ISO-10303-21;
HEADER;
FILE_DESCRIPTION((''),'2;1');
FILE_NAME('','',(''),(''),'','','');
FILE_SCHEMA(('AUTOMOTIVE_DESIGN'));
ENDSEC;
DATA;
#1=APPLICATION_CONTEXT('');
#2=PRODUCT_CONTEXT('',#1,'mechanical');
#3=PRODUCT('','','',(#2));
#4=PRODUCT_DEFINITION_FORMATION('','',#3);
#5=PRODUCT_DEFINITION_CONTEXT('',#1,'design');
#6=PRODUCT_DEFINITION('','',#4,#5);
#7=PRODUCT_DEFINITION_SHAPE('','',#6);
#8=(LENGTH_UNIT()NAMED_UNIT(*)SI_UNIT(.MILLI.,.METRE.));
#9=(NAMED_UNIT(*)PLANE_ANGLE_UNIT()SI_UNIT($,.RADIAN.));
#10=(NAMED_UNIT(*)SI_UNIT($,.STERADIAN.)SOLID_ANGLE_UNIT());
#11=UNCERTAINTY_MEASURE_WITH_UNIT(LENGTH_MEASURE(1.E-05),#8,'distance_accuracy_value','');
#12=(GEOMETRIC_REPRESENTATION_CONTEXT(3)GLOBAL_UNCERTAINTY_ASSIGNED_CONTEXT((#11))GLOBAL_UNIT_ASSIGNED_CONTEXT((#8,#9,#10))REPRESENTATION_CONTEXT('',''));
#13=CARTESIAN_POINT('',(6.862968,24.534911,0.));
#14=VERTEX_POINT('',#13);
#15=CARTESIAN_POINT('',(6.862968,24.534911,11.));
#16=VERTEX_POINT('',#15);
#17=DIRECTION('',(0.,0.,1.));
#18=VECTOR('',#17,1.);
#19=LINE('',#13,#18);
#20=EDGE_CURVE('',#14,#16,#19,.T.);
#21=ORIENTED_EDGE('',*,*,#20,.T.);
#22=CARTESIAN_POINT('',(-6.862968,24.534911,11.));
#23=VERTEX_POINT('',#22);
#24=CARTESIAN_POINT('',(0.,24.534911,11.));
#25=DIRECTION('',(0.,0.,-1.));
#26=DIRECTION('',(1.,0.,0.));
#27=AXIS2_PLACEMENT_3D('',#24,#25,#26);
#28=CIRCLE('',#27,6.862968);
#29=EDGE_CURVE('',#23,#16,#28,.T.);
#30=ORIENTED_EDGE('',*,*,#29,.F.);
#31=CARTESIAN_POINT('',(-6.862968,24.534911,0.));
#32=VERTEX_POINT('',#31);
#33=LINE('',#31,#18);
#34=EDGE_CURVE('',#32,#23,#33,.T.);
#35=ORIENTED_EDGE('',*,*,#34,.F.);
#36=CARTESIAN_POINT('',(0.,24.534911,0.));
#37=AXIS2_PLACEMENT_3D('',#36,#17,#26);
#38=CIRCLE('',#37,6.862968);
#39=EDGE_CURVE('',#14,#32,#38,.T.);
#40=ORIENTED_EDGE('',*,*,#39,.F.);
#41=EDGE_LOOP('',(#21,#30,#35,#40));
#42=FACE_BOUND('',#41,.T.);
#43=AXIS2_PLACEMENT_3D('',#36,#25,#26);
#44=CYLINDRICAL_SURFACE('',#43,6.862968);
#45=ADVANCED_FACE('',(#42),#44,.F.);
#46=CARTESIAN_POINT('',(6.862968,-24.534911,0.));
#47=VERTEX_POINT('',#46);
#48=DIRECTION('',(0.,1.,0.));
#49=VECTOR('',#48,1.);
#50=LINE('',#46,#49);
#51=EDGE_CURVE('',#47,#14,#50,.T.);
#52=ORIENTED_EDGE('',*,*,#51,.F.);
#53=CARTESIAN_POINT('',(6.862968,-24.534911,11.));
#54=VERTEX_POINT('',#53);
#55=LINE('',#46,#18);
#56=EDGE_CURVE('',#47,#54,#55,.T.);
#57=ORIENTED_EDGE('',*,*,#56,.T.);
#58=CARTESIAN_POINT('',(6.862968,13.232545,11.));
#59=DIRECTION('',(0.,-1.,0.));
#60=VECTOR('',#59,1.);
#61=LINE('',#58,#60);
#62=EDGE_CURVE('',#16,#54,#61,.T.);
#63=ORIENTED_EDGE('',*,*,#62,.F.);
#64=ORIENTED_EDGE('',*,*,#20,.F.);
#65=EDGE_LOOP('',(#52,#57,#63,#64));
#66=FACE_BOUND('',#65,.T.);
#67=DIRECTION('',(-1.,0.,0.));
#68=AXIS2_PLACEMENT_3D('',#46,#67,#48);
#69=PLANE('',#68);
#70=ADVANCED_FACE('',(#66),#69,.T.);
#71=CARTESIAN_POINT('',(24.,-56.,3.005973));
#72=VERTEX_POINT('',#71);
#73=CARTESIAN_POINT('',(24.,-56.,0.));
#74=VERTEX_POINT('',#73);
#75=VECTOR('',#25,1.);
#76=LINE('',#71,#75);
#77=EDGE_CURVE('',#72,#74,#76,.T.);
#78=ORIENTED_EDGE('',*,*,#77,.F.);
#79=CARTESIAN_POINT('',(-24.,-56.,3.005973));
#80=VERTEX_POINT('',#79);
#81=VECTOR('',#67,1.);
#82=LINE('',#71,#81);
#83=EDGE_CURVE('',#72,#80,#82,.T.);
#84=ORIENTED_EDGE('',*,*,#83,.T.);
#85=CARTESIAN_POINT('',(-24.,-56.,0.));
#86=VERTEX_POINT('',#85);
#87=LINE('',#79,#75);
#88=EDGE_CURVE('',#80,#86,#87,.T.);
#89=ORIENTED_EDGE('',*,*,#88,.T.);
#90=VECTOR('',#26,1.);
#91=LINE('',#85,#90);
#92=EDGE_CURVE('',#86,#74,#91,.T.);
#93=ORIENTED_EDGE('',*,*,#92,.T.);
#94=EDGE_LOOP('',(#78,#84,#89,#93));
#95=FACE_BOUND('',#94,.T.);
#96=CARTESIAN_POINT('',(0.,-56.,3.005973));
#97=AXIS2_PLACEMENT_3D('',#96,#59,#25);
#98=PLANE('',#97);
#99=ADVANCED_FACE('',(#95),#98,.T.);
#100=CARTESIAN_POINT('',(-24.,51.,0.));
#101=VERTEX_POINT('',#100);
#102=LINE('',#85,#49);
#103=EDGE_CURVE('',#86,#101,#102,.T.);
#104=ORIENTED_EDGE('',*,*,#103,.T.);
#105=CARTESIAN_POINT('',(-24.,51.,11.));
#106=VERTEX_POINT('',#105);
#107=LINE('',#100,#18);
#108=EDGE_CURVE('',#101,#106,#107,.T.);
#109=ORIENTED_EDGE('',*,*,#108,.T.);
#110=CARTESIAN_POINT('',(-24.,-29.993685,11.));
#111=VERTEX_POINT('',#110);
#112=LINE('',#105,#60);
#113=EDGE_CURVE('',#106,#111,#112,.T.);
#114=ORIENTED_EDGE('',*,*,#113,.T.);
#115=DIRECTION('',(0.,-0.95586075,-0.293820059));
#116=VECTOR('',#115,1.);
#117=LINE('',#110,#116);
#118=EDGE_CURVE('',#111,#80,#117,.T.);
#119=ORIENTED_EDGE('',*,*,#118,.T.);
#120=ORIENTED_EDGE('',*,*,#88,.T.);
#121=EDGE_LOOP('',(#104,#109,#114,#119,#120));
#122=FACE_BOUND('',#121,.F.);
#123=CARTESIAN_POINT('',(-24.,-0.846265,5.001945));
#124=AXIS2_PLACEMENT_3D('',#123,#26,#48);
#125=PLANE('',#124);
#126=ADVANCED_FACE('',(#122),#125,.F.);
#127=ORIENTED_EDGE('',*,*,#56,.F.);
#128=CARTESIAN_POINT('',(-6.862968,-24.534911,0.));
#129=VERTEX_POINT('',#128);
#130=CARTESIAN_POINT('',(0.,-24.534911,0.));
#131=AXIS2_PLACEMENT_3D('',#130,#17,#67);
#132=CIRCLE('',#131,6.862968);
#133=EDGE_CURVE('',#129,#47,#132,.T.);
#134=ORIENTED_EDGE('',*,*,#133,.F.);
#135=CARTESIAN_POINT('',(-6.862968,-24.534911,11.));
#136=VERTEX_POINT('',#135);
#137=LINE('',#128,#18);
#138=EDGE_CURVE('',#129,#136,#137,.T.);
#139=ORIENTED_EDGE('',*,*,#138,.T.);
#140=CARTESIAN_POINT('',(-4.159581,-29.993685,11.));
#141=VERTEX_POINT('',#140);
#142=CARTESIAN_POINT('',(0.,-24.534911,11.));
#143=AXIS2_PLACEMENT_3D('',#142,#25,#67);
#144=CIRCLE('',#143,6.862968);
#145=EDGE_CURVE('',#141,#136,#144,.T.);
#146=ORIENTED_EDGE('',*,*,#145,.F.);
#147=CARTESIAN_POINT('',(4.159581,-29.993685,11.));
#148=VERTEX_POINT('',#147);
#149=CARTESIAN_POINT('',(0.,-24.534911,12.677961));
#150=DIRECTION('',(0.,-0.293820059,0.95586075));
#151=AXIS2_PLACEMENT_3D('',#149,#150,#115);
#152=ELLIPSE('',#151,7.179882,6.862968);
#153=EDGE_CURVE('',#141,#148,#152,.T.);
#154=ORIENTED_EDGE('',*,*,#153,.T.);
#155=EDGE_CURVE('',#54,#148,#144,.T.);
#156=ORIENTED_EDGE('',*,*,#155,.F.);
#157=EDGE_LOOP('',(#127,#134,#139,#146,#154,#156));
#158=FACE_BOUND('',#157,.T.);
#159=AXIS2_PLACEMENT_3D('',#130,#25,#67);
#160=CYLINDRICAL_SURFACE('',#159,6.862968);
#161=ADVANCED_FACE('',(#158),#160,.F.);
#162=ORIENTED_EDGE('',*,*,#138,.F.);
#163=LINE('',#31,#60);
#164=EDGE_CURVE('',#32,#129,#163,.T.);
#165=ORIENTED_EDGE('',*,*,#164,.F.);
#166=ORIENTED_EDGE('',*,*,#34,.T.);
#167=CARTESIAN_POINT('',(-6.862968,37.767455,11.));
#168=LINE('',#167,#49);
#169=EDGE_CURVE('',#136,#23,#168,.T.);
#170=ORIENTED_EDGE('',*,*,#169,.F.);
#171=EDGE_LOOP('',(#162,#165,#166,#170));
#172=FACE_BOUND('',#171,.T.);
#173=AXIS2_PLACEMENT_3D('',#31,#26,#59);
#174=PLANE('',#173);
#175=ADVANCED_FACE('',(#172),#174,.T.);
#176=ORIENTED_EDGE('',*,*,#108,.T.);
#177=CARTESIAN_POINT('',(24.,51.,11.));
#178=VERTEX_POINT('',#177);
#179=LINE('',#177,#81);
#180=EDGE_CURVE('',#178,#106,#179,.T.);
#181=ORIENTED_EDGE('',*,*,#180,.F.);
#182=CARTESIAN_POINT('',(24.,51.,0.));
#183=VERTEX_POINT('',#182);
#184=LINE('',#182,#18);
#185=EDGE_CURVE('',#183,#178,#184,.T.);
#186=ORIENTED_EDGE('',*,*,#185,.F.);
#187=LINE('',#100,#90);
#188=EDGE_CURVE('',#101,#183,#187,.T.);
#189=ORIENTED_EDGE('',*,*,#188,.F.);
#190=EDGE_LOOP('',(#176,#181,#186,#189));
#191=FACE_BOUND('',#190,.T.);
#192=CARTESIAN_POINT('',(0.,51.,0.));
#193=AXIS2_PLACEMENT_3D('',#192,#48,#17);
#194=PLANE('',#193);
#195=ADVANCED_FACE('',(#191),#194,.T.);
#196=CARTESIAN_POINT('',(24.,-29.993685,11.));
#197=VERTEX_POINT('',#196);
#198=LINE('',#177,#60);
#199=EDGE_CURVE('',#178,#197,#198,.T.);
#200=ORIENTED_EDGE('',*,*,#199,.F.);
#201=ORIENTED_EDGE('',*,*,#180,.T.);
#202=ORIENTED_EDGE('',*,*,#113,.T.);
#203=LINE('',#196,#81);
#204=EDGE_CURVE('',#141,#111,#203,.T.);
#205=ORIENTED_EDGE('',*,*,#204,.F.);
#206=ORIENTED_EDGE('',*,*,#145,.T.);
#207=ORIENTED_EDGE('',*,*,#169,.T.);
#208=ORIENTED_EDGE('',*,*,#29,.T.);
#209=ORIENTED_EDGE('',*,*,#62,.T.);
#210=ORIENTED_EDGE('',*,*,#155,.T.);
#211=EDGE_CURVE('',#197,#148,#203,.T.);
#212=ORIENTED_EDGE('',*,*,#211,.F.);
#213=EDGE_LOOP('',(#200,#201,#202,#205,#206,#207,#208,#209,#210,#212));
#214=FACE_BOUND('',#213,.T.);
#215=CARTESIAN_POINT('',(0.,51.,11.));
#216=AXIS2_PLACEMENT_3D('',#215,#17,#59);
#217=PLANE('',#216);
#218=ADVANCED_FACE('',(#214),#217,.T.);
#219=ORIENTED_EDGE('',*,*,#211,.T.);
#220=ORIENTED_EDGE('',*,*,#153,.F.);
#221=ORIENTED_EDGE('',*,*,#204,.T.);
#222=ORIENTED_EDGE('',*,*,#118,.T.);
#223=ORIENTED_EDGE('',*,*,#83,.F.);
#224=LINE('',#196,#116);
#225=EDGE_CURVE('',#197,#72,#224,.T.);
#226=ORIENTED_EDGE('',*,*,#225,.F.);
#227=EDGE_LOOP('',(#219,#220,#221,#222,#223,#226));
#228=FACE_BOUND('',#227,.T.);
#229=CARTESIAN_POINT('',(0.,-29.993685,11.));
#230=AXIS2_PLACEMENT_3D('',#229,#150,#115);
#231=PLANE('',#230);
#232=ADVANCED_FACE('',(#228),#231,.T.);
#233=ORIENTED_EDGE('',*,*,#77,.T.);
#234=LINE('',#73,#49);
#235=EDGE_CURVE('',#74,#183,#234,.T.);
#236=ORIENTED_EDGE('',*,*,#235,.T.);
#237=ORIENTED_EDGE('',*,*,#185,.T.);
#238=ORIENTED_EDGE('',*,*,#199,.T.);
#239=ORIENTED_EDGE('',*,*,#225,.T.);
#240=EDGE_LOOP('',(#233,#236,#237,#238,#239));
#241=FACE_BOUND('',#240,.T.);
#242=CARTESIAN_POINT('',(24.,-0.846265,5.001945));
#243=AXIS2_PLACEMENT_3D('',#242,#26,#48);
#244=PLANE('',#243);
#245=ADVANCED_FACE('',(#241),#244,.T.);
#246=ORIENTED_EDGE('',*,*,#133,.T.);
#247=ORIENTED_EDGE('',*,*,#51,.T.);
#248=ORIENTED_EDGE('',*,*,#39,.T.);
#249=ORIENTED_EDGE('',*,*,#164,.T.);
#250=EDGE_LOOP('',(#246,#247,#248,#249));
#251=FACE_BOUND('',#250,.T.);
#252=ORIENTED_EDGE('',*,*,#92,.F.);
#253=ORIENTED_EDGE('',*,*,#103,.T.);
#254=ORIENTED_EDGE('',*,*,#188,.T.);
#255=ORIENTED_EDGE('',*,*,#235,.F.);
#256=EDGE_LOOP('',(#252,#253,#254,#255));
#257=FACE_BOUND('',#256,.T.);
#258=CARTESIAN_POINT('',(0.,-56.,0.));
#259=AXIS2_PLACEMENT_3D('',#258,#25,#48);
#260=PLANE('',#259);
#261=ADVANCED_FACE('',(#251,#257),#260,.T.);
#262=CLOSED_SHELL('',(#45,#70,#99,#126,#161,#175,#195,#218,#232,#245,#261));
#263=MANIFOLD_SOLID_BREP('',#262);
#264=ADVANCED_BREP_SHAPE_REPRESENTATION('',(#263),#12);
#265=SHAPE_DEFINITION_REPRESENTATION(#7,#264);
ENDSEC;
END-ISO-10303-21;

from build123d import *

# Parameters (mm, degrees)
F1_DEPTH = 24
F3_DEPTH = 11.001
F4_DEPTH = 25.8


# Not quite as in the source:
# - a feature names something its author has since deleted; it is built from what else it names


with BuildPart() as f1:
    # F0 (on Right) → F1 (new body, symmetric)
    with BuildSketch(Plane.YZ):
        Polygon((-56, 3.0059725977), (-56, 0), (51, 0), (51, 11), (-29.9936849624, 11), align=None)
    extrude(amount=F1_DEPTH, both=True)

    # F2 (on Top) → F3 (cut, through all)
    with BuildSketch(Plane.XY):
        with BuildLine():
            ThreePointArc((-6.8629677407, 24.5349109173), (0, 17.6719431765), (6.8629677407, 24.5349109173))
            Line((6.8629677407, 24.5349109173), (-6.8629677407, 24.5349109173))
        make_face()
        with BuildLine():
            Line((-6.8629677407, 24.5349109173), (6.8629677407, 24.5349109173))
            ThreePointArc((6.8629677407, 24.5349109173), (0, 31.397878658), (-6.8629677407, 24.5349109173))
        make_face()
        with BuildLine():
            Line((6.8629677407, -24.5349109173), (6.8629677407, 24.5349109173))
            ThreePointArc((6.8629677407, 24.5349109173), (0, 17.6719431765), (-6.8629677407, 24.5349109173))
            Line((-6.8629677407, 24.5349109173), (-6.8629677407, -24.5349109173))
            ThreePointArc((-6.8629677407, -24.5349109173), (0, -17.6719431765), (6.8629677407, -24.5349109173))
        make_face()
        with BuildLine():
            ThreePointArc((-6.8629677407, -24.5349109173), (0, -31.397878658), (6.8629677407, -24.5349109173))
            Line((6.8629677407, -24.5349109173), (-6.8629677407, -24.5349109173))
        make_face()
        with BuildLine():
            Line((-6.8629677407, -24.5349109173), (6.8629677407, -24.5349109173))
            ThreePointArc((6.8629677407, -24.5349109173), (0, -17.6719431765), (-6.8629677407, -24.5349109173))
        make_face()
    extrude(amount=F3_DEPTH, mode=Mode.SUBTRACT)

    # F2 (on Top) → F4 (cut)
    with BuildSketch(Plane.XY):
        with BuildLine():
            ThreePointArc((-6.8629677407, 24.5349109173), (0, 17.6719431765), (6.8629677407, 24.5349109173))
            Line((6.8629677407, 24.5349109173), (-6.8629677407, 24.5349109173))
        make_face()
        with BuildLine():
            Line((-6.8629677407, 24.5349109173), (6.8629677407, 24.5349109173))
            ThreePointArc((6.8629677407, 24.5349109173), (0, 31.397878658), (-6.8629677407, 24.5349109173))
        make_face()
        with BuildLine():
            Line((6.8629677407, -24.5349109173), (6.8629677407, 24.5349109173))
            ThreePointArc((6.8629677407, 24.5349109173), (0, 17.6719431765), (-6.8629677407, 24.5349109173))
            Line((-6.8629677407, 24.5349109173), (-6.8629677407, -24.5349109173))
            ThreePointArc((-6.8629677407, -24.5349109173), (0, -17.6719431765), (6.8629677407, -24.5349109173))
        make_face()
        with BuildLine():
            ThreePointArc((-6.8629677407, -24.5349109173), (0, -31.397878658), (6.8629677407, -24.5349109173))
            Line((6.8629677407, -24.5349109173), (-6.8629677407, -24.5349109173))
        make_face()
        with BuildLine():
            Line((-6.8629677407, -24.5349109173), (6.8629677407, -24.5349109173))
            ThreePointArc((6.8629677407, -24.5349109173), (0, -17.6719431765), (-6.8629677407, -24.5349109173))
        make_face()
    extrude(amount=F4_DEPTH, mode=Mode.SUBTRACT)


solid = f1.part
